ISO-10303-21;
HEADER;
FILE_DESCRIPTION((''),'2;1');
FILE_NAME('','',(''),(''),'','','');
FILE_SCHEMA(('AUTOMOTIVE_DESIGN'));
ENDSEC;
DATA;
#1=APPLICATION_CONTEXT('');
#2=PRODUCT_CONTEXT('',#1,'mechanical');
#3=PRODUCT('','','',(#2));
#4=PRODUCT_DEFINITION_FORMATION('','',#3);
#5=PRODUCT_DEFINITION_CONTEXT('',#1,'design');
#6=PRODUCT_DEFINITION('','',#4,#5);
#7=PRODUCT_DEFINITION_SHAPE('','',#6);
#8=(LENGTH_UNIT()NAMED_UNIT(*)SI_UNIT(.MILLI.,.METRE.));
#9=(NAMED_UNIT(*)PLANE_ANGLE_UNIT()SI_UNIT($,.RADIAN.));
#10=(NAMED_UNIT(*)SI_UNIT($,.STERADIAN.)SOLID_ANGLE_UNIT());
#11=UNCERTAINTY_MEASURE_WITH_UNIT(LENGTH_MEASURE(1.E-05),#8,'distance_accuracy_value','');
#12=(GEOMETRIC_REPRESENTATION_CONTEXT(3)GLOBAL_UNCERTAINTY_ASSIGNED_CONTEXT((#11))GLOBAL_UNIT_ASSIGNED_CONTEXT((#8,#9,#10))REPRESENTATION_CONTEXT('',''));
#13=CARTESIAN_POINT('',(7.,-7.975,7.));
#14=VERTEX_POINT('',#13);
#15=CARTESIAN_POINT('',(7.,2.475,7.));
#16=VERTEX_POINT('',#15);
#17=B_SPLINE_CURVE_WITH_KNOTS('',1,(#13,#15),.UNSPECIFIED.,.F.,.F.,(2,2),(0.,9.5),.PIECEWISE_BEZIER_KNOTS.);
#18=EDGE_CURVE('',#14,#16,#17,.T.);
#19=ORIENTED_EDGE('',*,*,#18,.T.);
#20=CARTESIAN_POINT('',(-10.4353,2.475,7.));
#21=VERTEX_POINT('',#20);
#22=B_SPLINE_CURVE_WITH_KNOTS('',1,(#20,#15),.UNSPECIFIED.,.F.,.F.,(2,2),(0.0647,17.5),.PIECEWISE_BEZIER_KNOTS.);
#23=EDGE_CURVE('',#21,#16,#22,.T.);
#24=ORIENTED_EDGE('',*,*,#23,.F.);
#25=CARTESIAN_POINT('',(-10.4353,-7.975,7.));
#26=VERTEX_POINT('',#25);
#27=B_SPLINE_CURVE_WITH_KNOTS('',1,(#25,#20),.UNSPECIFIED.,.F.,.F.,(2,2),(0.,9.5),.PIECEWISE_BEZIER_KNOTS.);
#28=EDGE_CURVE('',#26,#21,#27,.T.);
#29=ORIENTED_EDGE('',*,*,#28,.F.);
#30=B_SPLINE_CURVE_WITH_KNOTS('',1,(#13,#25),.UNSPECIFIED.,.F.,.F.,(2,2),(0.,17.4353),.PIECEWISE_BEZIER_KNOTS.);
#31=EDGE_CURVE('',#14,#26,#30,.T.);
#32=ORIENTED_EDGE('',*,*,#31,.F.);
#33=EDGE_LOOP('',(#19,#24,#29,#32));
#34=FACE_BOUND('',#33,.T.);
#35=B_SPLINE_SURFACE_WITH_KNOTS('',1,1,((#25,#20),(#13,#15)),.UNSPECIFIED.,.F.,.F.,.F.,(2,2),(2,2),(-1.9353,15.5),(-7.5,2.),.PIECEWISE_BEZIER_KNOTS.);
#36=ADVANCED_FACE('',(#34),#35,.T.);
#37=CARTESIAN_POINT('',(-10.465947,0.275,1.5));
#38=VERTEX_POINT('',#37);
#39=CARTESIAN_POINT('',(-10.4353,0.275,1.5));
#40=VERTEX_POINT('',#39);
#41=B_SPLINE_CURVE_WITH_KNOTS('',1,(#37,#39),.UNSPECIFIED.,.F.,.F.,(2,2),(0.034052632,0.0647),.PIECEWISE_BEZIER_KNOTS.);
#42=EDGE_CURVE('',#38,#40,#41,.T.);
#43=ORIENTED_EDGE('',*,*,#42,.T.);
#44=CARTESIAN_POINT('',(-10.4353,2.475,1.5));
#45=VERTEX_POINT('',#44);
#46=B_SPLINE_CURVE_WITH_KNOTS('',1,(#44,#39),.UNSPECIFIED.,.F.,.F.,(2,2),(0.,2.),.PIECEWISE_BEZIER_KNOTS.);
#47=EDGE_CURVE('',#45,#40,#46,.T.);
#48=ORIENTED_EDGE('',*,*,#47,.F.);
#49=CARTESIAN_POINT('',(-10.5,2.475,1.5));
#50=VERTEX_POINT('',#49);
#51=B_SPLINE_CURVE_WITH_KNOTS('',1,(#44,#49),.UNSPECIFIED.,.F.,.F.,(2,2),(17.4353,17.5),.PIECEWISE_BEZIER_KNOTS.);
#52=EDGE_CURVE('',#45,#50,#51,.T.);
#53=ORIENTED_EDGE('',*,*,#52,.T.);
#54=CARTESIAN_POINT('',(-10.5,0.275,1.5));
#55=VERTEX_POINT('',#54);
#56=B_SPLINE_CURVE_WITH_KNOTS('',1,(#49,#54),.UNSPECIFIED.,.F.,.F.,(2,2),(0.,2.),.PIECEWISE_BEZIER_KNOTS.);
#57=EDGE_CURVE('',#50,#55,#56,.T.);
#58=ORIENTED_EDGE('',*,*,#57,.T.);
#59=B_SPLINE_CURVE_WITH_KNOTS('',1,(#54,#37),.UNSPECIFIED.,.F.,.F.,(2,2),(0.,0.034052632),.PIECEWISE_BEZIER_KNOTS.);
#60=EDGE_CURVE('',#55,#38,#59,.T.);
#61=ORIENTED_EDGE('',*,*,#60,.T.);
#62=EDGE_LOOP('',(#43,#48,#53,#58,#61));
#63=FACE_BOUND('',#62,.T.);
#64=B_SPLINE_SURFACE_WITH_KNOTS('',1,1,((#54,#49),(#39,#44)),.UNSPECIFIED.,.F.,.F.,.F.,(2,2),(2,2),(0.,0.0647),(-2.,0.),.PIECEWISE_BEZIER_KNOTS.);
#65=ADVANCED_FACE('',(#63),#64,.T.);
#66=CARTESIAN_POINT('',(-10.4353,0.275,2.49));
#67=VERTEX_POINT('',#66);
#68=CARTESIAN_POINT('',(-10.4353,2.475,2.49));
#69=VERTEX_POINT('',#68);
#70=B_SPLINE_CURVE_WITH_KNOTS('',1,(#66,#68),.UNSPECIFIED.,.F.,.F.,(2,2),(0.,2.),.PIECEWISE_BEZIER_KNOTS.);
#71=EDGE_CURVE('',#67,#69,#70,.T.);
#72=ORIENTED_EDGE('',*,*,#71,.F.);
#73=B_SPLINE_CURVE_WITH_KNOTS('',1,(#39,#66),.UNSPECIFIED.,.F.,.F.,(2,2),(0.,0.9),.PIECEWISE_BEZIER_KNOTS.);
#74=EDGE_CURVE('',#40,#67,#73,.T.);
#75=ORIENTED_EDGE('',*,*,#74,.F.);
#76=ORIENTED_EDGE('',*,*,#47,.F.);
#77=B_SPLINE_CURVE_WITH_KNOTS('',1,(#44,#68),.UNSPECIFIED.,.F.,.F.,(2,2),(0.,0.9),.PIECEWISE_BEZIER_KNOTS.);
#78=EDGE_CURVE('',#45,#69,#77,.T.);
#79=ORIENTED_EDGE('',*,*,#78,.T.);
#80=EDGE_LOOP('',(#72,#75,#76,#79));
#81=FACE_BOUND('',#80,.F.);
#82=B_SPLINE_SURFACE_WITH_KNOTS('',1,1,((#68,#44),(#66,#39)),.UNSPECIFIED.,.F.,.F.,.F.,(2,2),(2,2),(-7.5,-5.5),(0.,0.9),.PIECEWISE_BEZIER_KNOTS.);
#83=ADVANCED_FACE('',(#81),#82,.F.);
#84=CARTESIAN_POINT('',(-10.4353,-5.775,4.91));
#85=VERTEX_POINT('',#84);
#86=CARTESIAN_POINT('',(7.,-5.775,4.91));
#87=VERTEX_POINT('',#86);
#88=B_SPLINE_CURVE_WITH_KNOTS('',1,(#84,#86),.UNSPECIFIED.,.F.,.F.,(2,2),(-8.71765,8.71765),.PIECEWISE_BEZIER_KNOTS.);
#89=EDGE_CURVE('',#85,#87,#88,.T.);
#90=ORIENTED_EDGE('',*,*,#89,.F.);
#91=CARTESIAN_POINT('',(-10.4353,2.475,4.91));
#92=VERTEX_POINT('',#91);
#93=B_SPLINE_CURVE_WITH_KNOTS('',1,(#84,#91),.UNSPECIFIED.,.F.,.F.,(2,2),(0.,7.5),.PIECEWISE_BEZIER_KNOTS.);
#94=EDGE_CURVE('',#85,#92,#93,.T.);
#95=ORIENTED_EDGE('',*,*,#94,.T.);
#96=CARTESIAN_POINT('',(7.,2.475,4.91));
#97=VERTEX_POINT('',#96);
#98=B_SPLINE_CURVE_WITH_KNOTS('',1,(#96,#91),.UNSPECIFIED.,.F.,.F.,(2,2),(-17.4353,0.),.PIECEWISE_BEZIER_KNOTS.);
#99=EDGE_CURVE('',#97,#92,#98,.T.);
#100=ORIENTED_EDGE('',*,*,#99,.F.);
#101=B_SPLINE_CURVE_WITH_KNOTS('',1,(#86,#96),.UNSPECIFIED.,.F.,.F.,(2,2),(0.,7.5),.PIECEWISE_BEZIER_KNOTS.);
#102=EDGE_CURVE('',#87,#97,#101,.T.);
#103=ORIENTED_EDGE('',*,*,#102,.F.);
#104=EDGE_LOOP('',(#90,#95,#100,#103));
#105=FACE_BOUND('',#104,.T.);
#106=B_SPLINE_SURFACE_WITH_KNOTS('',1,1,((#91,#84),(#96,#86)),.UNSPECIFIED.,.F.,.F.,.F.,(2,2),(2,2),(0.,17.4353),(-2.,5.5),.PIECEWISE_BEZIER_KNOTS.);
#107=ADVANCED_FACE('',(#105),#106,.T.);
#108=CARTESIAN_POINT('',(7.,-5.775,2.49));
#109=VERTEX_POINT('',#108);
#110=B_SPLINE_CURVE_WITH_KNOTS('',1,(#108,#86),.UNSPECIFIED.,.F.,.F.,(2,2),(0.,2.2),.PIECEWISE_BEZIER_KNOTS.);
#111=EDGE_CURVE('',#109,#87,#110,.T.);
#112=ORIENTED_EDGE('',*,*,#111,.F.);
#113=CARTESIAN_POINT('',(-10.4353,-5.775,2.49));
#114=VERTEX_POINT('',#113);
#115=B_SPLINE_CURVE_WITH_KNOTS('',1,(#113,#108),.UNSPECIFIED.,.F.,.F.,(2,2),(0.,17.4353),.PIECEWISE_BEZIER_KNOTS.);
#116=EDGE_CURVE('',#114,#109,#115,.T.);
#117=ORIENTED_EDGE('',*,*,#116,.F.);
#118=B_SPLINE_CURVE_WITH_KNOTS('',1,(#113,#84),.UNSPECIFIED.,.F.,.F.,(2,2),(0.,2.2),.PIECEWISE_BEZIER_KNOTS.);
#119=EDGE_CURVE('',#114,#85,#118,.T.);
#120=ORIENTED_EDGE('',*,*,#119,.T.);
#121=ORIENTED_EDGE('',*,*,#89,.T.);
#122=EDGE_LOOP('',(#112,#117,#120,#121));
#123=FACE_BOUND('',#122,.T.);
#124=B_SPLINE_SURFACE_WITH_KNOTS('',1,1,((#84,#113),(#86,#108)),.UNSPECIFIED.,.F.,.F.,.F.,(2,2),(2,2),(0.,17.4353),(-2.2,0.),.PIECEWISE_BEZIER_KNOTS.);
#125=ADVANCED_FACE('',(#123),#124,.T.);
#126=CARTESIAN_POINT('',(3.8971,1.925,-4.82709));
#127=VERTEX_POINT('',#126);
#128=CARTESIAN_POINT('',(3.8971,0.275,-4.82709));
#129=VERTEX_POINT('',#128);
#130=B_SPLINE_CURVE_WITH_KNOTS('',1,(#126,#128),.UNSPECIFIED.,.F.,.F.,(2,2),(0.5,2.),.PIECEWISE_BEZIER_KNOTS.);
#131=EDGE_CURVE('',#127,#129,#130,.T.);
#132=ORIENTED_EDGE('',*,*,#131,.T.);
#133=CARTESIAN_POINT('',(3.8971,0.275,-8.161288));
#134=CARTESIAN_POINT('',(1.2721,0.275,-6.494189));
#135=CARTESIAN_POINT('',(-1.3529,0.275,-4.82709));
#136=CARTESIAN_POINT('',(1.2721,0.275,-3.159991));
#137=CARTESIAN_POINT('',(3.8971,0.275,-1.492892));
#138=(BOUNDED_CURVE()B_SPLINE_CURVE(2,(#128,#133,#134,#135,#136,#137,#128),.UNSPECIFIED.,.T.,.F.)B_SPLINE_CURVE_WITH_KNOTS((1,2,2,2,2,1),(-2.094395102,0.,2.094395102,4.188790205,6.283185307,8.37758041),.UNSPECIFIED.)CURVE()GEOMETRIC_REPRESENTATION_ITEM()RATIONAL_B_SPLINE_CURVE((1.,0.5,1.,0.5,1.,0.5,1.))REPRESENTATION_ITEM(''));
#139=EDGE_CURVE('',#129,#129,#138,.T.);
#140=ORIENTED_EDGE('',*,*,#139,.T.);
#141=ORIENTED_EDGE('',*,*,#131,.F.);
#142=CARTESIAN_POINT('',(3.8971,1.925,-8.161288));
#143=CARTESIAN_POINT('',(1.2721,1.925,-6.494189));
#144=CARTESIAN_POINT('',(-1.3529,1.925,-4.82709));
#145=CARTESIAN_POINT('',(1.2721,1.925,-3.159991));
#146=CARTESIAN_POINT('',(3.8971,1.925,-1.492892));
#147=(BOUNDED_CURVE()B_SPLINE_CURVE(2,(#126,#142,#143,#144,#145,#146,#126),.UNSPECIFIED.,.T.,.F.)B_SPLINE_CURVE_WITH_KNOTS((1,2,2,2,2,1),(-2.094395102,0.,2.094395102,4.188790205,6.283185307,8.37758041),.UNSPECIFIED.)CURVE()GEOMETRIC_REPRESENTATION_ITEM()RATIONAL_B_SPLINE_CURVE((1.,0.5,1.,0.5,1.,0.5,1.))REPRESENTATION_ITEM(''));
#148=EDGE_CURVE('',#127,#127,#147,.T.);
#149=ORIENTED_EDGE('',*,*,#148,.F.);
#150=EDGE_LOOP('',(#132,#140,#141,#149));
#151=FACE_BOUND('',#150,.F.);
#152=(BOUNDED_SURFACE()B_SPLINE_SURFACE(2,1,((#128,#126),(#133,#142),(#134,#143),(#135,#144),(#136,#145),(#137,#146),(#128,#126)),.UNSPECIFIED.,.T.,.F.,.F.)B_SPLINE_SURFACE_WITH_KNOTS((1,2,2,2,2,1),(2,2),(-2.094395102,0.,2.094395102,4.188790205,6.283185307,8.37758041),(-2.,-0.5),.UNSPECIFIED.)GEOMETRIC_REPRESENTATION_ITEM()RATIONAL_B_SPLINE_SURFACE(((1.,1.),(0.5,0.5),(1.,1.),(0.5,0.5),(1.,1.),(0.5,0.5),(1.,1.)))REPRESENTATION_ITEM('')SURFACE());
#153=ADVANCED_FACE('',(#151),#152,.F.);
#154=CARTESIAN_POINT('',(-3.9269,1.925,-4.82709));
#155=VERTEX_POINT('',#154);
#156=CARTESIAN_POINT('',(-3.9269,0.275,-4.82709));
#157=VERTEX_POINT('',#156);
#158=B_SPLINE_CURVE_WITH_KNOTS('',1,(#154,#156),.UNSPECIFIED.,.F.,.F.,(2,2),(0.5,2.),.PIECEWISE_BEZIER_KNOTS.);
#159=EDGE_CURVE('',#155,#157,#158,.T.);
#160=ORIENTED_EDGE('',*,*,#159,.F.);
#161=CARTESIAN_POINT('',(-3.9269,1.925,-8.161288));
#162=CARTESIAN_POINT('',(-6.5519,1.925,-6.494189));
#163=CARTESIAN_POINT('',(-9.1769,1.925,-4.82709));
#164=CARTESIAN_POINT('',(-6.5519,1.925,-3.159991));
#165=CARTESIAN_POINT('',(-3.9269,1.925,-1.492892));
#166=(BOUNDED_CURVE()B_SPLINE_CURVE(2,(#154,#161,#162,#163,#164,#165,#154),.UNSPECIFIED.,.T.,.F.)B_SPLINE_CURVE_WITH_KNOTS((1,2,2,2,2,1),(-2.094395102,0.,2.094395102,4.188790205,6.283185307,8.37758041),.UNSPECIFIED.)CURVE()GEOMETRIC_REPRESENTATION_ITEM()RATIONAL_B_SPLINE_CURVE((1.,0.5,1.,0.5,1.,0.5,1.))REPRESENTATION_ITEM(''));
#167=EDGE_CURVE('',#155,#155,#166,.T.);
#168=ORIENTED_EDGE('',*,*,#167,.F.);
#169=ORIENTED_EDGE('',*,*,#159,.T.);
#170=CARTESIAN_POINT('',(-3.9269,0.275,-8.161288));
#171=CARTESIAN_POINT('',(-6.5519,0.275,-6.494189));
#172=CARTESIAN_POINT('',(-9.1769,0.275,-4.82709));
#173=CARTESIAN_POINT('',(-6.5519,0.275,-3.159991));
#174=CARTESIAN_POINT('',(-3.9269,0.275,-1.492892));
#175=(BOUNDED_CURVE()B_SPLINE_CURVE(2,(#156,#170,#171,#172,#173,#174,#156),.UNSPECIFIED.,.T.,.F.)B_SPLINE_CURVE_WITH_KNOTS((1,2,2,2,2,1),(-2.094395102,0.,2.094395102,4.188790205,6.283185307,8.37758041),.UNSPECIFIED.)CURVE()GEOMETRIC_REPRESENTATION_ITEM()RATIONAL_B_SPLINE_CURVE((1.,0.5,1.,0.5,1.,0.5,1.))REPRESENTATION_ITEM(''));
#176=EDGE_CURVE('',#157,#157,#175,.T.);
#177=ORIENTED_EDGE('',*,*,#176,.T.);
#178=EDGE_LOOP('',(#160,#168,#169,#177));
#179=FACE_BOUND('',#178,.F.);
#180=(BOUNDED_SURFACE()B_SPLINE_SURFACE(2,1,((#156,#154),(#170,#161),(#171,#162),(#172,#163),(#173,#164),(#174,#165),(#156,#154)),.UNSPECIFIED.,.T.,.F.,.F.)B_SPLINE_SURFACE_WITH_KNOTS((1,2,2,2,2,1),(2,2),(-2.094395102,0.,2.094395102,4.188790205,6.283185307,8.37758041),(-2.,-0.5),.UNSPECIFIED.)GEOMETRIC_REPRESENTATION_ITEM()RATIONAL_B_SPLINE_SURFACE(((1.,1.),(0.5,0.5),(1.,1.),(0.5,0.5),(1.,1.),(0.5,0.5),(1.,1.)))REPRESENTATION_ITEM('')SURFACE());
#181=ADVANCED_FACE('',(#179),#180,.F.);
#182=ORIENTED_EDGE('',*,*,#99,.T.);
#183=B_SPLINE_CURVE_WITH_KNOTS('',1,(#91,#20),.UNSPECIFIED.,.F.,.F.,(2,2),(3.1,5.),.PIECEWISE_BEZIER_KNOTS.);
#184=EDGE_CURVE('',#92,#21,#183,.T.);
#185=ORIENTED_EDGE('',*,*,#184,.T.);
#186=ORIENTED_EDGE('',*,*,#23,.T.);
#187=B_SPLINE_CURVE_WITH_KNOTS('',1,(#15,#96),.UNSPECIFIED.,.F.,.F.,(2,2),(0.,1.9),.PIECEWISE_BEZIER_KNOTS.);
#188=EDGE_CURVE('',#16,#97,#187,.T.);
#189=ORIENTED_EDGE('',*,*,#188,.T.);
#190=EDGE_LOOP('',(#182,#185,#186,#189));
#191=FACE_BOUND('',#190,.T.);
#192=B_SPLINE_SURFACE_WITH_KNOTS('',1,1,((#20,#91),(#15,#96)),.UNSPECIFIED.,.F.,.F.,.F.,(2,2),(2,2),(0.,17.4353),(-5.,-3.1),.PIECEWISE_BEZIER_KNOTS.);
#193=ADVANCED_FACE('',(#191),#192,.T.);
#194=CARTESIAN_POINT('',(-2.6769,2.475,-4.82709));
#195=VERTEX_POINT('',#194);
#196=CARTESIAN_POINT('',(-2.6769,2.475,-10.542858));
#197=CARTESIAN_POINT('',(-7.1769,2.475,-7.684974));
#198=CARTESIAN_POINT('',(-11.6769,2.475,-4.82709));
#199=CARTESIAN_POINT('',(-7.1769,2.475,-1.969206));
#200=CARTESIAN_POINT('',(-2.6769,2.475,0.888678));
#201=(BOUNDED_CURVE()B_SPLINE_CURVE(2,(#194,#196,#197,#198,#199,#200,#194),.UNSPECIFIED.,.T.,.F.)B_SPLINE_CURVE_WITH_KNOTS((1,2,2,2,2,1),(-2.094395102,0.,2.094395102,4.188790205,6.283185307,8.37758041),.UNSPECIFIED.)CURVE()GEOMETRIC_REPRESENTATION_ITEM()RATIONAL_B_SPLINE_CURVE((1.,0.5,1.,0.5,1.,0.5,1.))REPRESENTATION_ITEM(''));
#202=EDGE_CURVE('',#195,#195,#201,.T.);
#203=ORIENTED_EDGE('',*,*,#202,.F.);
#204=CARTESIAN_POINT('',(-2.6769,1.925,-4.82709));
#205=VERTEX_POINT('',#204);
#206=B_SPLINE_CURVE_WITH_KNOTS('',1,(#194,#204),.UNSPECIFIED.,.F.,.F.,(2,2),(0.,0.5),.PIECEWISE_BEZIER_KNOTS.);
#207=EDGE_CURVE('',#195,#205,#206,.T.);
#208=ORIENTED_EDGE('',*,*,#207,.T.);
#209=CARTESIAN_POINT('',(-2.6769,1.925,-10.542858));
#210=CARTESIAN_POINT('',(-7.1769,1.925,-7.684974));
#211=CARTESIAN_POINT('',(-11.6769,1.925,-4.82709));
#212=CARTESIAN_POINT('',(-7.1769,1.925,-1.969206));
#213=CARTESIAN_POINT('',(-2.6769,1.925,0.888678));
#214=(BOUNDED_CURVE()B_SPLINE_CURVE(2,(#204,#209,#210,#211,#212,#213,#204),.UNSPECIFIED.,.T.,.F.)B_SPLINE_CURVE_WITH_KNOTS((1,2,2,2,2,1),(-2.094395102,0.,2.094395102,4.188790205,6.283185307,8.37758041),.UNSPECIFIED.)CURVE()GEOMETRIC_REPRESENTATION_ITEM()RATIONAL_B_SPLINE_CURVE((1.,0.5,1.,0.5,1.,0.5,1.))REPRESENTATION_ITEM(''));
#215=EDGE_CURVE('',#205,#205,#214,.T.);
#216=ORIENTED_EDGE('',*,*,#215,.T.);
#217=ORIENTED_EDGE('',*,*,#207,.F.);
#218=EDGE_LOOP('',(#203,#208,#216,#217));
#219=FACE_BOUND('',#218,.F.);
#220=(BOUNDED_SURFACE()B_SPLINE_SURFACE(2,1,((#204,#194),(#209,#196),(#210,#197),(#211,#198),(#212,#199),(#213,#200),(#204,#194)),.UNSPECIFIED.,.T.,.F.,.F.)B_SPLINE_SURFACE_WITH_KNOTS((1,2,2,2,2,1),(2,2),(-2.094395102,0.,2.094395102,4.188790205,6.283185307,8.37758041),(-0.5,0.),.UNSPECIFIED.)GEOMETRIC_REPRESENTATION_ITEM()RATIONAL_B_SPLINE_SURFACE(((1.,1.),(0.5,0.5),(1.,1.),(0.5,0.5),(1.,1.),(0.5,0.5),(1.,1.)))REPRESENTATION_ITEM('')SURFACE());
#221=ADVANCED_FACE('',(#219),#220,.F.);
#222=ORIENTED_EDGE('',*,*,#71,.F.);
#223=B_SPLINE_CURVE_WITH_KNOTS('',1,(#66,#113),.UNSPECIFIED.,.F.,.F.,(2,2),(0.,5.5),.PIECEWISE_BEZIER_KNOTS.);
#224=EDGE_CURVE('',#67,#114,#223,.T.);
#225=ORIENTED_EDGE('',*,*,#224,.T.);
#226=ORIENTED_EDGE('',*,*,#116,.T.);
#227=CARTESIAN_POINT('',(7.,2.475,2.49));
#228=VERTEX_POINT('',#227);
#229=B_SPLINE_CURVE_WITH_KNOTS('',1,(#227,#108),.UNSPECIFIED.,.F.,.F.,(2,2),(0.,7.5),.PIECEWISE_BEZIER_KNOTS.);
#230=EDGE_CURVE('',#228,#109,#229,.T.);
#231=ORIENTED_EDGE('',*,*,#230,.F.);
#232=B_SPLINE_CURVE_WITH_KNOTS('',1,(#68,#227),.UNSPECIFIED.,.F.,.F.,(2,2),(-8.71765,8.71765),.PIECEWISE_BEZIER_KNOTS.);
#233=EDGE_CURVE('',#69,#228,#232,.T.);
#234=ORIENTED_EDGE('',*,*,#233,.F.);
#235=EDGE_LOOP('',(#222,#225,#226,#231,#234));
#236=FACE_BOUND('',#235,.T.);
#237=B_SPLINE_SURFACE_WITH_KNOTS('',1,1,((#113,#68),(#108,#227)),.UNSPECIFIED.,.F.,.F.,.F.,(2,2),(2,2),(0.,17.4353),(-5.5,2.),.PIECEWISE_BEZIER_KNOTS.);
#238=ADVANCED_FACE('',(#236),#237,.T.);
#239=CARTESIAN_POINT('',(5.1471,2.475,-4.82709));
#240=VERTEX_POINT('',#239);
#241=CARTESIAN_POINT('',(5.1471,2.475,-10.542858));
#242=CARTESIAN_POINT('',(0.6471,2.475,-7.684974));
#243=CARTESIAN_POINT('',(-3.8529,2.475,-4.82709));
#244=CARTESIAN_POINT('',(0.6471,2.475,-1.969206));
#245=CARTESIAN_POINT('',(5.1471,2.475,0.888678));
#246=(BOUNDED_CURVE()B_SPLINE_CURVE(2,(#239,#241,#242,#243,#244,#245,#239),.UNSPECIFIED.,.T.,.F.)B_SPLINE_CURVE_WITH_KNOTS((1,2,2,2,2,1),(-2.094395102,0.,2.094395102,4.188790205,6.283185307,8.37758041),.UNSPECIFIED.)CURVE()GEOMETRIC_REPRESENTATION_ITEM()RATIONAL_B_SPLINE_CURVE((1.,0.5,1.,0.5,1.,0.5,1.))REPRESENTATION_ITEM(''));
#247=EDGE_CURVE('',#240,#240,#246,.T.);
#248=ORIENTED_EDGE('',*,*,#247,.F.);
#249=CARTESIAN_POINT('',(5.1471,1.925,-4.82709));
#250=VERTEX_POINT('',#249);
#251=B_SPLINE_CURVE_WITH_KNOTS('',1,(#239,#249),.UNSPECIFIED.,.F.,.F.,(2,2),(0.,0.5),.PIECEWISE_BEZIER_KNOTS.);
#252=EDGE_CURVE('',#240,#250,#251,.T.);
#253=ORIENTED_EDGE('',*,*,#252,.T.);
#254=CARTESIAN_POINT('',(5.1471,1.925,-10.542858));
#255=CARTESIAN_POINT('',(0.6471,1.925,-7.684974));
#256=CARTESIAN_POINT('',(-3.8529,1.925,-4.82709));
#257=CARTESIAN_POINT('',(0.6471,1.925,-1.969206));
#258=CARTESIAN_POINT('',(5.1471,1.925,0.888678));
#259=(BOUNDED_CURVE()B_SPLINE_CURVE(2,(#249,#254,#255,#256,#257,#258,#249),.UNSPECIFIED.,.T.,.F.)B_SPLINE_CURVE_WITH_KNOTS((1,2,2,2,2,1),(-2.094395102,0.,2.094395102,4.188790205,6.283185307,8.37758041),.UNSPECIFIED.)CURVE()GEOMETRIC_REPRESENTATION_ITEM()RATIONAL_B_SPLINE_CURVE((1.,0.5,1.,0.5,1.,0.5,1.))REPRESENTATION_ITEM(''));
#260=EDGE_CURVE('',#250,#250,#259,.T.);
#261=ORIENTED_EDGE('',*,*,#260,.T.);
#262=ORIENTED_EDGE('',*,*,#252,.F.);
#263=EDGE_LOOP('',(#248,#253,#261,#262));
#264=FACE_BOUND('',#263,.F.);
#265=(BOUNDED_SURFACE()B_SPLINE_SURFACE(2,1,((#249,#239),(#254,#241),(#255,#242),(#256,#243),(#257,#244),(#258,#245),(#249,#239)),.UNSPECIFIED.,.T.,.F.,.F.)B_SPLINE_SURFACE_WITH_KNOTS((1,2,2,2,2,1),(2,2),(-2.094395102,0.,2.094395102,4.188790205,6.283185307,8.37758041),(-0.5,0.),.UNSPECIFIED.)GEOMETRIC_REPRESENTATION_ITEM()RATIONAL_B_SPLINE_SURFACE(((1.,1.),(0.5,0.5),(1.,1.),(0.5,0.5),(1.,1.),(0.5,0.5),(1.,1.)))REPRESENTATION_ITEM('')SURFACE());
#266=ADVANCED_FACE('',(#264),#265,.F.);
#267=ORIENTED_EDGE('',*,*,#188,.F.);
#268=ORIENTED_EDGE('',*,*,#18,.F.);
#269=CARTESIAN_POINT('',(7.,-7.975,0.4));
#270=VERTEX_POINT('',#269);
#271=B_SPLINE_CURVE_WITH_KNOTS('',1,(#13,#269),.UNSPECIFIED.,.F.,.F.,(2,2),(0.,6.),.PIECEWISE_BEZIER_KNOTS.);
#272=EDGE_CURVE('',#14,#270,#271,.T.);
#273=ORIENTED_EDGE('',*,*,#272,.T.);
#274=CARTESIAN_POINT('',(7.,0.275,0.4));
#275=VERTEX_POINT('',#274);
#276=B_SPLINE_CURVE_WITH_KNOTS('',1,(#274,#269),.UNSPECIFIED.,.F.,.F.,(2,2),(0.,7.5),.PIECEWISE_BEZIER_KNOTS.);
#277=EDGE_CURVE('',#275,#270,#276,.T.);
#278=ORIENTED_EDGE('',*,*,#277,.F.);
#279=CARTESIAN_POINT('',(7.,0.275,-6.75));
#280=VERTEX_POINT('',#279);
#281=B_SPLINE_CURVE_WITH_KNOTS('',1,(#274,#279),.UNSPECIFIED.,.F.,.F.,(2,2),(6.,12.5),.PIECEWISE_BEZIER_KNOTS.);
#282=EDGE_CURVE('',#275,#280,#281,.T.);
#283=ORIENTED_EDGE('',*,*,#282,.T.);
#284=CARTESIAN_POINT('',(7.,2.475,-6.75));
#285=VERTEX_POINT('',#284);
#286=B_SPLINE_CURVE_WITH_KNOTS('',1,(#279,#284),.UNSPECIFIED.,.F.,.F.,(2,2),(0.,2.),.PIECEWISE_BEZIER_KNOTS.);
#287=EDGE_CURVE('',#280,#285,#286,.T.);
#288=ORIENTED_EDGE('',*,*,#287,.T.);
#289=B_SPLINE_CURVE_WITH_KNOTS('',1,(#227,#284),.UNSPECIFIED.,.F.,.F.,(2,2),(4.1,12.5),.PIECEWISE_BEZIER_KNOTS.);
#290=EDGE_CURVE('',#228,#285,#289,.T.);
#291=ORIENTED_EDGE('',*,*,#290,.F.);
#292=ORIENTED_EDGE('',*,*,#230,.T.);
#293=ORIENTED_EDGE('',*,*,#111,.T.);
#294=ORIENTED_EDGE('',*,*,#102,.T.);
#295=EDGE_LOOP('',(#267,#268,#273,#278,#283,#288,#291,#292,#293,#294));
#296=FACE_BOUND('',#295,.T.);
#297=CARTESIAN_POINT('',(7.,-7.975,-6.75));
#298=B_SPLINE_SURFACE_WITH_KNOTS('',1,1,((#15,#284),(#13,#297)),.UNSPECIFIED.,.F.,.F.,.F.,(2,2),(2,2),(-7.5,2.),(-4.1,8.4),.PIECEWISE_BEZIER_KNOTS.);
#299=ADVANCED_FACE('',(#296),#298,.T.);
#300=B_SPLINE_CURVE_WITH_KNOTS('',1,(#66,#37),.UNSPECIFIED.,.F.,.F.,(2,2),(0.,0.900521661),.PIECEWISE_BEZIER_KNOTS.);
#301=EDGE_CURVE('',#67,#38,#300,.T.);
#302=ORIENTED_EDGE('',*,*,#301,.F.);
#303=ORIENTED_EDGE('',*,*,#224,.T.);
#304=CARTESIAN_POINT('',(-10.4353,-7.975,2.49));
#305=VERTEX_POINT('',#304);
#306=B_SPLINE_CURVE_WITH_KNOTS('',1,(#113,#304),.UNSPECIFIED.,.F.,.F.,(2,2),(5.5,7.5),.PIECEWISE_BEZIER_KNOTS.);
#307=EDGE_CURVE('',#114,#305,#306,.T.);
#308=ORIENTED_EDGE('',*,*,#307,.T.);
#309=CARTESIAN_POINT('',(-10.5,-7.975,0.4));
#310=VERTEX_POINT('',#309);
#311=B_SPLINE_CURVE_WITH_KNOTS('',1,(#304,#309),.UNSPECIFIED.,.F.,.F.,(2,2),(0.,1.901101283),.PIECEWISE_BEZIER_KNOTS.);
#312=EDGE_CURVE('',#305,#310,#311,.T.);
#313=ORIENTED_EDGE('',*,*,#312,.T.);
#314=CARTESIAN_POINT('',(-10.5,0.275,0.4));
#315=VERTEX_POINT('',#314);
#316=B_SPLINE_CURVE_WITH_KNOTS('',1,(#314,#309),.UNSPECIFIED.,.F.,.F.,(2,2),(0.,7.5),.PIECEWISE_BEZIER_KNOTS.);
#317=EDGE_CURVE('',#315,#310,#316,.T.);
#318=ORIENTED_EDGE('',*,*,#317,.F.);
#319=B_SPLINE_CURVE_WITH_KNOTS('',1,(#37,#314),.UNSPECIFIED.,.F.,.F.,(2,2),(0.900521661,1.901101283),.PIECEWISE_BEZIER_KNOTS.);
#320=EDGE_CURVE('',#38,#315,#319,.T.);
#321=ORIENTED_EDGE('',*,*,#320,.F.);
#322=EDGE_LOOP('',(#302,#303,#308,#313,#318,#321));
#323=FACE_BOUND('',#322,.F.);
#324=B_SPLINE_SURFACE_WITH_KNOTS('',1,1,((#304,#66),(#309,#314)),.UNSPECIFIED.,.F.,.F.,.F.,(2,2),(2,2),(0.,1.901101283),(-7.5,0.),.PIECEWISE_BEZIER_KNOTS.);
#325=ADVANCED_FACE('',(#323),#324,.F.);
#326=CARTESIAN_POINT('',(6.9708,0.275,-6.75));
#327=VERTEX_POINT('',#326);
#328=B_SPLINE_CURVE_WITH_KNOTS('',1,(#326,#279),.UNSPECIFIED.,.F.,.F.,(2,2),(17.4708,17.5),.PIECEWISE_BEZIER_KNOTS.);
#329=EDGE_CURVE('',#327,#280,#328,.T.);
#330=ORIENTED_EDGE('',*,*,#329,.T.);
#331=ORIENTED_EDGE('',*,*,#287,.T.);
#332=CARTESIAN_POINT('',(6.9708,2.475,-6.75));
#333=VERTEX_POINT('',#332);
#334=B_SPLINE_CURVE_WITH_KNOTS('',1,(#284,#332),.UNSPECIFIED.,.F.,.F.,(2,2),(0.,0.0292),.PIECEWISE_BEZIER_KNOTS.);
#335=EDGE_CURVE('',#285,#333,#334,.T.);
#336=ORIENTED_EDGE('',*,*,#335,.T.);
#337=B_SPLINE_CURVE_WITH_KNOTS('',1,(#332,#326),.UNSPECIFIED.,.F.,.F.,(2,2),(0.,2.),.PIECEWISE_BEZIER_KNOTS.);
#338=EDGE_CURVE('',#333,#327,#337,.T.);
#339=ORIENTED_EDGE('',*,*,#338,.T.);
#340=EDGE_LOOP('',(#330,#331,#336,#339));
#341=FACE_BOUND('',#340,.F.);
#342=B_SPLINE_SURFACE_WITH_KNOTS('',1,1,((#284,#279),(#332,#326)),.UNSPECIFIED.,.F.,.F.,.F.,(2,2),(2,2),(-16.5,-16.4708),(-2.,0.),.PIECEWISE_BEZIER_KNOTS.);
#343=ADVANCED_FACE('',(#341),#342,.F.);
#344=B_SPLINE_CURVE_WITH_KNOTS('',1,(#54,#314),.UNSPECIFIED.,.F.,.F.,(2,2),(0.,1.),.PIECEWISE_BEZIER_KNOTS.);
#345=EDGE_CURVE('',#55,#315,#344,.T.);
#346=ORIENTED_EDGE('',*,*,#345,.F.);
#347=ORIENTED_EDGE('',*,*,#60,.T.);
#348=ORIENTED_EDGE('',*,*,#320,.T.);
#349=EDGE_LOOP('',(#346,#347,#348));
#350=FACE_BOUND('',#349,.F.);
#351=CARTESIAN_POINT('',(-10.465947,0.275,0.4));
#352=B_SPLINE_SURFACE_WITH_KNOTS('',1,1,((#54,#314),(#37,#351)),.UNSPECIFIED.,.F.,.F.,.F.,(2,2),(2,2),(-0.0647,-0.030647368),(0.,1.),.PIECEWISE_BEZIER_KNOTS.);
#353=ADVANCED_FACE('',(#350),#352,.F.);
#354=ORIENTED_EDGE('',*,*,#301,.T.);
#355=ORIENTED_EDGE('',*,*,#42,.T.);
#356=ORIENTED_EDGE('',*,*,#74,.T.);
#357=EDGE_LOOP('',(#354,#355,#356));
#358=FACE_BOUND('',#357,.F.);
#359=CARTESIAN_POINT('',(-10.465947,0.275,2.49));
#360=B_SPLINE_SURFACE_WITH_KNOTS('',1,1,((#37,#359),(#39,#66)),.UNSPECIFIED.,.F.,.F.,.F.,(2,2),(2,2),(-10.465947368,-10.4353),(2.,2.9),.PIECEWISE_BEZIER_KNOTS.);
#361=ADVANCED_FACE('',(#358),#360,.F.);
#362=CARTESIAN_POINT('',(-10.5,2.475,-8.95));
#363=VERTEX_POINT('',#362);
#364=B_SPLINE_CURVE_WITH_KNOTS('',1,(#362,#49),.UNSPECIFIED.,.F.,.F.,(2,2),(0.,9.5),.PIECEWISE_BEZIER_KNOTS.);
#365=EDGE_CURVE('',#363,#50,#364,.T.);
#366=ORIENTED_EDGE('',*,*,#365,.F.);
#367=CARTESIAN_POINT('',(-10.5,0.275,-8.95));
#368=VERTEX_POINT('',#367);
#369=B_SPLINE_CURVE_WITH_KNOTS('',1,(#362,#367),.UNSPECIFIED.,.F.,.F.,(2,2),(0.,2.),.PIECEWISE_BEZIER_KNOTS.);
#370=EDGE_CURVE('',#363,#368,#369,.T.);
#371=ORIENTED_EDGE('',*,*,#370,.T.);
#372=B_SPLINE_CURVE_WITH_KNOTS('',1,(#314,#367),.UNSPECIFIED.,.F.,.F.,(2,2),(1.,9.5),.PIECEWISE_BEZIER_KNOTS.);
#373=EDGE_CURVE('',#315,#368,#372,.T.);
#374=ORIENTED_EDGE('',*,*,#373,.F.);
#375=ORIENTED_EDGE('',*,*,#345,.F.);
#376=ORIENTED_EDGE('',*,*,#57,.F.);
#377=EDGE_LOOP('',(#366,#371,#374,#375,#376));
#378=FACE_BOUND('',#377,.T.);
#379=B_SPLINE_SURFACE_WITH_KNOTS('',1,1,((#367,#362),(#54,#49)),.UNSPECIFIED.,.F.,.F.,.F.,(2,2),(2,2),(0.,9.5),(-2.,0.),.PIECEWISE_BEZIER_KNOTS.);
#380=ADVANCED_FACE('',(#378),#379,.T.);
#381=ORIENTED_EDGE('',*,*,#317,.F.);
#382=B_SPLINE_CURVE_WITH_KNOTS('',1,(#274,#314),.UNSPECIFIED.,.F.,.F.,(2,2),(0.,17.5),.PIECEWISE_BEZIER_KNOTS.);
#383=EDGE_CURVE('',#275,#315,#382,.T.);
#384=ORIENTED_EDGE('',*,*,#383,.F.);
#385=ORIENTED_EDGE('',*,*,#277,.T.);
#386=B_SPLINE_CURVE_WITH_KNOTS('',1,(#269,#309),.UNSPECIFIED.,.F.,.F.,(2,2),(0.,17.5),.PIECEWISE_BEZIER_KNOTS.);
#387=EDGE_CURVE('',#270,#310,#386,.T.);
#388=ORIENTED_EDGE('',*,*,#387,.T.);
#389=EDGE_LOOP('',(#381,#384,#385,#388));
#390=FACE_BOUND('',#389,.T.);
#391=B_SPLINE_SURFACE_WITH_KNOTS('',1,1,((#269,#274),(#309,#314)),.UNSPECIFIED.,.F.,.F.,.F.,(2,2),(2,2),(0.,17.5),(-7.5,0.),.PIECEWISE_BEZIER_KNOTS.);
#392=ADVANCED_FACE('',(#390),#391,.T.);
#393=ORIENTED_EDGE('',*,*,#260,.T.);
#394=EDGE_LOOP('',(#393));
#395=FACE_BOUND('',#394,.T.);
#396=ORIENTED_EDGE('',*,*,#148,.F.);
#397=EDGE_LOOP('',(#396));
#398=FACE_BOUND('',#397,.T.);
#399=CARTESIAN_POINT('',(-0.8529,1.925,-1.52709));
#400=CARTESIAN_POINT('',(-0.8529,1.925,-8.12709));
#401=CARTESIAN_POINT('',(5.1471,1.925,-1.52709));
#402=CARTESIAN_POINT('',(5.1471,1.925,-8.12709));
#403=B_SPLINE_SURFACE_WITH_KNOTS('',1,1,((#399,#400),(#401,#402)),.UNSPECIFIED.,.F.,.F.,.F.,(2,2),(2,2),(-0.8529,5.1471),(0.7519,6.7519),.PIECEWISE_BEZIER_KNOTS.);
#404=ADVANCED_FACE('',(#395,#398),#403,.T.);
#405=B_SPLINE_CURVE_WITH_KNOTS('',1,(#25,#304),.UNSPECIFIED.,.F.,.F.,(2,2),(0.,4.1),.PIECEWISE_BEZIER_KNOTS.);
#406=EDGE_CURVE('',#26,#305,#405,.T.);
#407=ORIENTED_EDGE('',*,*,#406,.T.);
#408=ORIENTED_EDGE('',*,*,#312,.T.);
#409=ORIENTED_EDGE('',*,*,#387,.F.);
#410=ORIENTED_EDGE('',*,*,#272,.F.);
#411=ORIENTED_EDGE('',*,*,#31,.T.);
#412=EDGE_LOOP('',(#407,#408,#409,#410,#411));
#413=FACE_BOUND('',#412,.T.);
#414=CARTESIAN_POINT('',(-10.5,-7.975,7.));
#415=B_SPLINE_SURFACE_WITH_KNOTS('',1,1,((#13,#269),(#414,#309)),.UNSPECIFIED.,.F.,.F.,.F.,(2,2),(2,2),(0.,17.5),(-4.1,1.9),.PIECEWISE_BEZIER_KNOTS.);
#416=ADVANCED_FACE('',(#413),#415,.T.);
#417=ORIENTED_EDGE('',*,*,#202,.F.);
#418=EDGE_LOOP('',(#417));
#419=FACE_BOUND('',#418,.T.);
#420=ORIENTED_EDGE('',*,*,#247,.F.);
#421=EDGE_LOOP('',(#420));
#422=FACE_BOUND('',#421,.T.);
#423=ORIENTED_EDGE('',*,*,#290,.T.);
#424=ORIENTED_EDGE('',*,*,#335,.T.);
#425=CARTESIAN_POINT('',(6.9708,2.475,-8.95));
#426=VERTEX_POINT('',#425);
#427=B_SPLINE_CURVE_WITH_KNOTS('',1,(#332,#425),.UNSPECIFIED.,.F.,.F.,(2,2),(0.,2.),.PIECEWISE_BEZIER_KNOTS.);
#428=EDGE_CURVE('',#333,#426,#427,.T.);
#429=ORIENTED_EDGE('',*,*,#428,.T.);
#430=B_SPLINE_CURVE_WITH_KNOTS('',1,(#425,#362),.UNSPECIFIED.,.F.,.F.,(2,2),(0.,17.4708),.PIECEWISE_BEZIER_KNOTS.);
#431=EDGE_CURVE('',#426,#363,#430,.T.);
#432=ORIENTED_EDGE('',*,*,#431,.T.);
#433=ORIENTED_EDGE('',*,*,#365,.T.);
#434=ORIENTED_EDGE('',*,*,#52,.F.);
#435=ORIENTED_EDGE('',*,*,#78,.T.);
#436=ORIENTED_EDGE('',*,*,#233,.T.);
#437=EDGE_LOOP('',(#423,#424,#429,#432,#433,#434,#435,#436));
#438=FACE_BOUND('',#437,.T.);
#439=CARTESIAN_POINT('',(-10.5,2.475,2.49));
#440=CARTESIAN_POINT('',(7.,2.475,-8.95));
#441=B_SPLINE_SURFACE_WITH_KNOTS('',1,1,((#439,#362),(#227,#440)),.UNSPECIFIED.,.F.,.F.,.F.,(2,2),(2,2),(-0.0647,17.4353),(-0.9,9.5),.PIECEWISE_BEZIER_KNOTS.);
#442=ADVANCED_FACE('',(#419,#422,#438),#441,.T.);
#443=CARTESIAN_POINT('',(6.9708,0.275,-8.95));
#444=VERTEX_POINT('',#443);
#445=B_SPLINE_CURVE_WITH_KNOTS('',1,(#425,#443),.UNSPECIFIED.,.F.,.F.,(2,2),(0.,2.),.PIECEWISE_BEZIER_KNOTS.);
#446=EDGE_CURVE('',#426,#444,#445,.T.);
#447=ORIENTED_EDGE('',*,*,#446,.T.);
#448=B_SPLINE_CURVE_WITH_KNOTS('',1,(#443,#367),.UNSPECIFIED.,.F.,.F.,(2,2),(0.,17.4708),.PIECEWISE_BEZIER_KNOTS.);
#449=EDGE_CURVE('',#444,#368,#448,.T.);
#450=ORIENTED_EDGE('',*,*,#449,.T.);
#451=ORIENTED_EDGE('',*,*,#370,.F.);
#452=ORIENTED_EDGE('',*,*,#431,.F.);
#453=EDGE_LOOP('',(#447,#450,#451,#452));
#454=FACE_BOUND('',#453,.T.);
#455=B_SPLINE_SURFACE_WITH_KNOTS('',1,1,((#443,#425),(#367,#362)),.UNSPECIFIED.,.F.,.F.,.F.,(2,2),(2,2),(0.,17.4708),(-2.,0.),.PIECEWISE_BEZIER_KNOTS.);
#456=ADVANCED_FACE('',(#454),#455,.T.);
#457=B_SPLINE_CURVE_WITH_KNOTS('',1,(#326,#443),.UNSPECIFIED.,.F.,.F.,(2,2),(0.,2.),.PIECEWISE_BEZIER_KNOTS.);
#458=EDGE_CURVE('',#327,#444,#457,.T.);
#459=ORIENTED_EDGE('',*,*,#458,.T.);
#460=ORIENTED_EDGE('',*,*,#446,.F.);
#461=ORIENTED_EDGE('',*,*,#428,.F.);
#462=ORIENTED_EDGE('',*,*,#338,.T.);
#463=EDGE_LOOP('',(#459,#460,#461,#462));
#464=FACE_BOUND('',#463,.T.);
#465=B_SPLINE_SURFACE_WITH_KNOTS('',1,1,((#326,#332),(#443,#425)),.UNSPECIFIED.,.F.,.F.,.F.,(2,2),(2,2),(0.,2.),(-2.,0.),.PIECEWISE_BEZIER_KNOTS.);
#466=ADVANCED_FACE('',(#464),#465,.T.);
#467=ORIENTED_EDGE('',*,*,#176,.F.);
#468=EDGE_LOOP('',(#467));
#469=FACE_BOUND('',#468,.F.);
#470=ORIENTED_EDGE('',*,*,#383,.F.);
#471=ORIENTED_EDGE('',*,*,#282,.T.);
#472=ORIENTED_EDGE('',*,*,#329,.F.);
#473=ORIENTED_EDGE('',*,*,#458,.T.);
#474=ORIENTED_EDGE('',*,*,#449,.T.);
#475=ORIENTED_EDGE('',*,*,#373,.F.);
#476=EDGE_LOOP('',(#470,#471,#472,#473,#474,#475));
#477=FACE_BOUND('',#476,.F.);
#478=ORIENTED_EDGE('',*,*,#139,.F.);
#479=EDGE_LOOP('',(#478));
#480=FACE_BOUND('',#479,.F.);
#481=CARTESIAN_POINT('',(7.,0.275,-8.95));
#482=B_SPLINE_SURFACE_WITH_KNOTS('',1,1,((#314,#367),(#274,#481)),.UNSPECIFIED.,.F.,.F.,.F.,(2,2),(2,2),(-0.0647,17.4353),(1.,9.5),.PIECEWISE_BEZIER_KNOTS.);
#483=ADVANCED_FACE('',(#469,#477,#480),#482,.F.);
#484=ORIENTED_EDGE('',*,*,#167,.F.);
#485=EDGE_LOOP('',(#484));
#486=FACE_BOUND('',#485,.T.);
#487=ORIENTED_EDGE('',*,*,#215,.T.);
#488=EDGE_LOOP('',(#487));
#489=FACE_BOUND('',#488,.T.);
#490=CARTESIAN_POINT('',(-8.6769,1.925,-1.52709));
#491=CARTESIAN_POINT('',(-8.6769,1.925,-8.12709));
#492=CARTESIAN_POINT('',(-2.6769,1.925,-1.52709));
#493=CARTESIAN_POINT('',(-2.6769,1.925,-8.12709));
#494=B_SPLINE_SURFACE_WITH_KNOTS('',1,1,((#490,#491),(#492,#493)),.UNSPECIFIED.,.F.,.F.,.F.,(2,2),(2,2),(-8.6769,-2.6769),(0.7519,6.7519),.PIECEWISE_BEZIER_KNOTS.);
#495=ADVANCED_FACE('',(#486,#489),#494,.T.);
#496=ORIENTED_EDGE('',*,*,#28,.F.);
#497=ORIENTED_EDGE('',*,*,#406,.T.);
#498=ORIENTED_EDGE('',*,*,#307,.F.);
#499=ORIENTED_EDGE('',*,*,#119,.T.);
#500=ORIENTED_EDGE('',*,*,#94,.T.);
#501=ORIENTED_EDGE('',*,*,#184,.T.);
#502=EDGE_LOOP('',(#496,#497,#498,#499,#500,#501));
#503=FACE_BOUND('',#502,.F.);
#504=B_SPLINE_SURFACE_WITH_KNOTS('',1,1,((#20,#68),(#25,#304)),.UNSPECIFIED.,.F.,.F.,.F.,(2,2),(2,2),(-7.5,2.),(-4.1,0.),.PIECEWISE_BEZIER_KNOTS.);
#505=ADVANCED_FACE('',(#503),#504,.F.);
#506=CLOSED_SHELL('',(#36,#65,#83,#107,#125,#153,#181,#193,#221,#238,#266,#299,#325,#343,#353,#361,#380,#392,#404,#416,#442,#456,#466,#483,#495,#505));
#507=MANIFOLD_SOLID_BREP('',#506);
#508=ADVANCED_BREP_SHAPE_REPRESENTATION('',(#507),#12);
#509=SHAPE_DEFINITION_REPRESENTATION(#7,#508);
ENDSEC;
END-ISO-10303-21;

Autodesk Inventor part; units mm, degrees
ref_plane "YZ Plane" through (0, 0, 0) normal (1, 0, 0) x (0, 1, 0)
ref_plane "XZ Plane" through (0, 0, 0) normal (0, 1, 0) x (-1, 0, 0)
ref_plane "XY Plane" through (0, 0, 0) normal (0, 0, 1) x (1, 0, 0)
sketch "Boceto1" plane through (0, 0, 0) normal (0, 1, 0) x (-1, 0, 0)
  line L0 (0, 0) -> (3.5, 0)
  line L1 (3.5, 0) -> (5.5, 0)
  line L2 (0, 0) -> (-2, 0)
  line L3 (-2, -5.5) -> (5.5, -5.5)
  line L4 (-2, 0) -> (-5, 0)
  line L5 (-5, -5.5) -> (-2, -5.5)
  line L6 (5.5, 0) -> (8.5, 0)
  line L7 (8.5, -5.5) -> (5.5, -5.5)
  line L8 (8.5, -5.5) -> (9.5, -5.5)
  line L9 (9.5, 0) -> (8.5, 0)
  line L10 (-5, -5.5) -> (-6, -5.5)
  line L11 (-6, 0) -> (-5, 0)
  line L12 (9.5, -5.5) -> (10.5, -5.5)
  line L13 (10.5, -5.5) -> (10.5, 0)
  line L14 (10.5, 0) -> (9.5, 0)
  line L15 (-6, -5.5) -> (-7, -5.5)
  line L16 (-7, -5.5) -> (-7, 0)
  line L17 (-7, 0) -> (-6, 0)
  dimension "d30" = 1
  dimension "d37" = 1
  dimension "d38" = 1
extrude "Extrusión3" add sketch "Boceto1" along normal blind 2
sketch "Boceto4" plane through (-8.5, 0, 0) normal (0, 0, 1) x (1, 0, 0)
  line L0 (15.5, 2) -> (-2, 2) projected
  line L1 (0, 2) -> (13.5, 2)
  line L2 (13.5, 2) -> (13.5, 0)
  line L3 (13.5, 0) -> (0, 0)
  line L4 (0, 0) -> (0, 2)
  point P0 (8.5, 0)
  point P1 (14.5, 2)
  point P2 (-1, 2)
extrude "Extrusión4" add sketch "Boceto4" along normal blind 2
sketch "Boceto13" plane through (0, 2, 0) normal (0, 1, 0) x (1, 0, 0)
  line L0 (7, 5.5) -> (-10.5, 5.5) projected
  line L1 (-10.5, 5.5) -> (6.9708, 5.5)
  line L2 (6.9708, 5.5) -> (6.9708, 7.5)
  line L3 (6.9708, 7.5) -> (-10.5, 7.5)
  line L4 (-10.5, 7.5) -> (-10.5, 5.5)
  point P0 (0, 0)
  point P1 (-8.5, 5.5)
extrude "Extrusión13" add sketch "Boceto13" against normal blind 2
sketch "Boceto14" plane through (0, 2, 0) normal (0, 1, 0) x (1, 0, 0)
  circle A0 centre (2.1471, 3.7519) radius 1.75
  circle A1 centre (-5.6769, 3.7519) radius 1.75
  line L0 (1.1471, 3.7519) -> (2.1471, 3.7519)
  line L1 (-4.6769, 3.7519) -> (-5.6769, 3.7519)
  point P0 (0, 0)
  dimension "d43" = 3.5
  dimension "d44" = 3.5
  dimension "d45" = 1
  dimension "d46" = 1
extrude "Extrusión14" cut sketch "Boceto14" against normal blind 2
sketch "Boceto15" plane through (0, 2, 0) normal (0, 1, 0) x (1, 0, 0)
  circle A0 centre (2.1471, 3.7519) radius 1.75 projected
  circle A1 centre (2.1471, 3.7519) radius 3
  circle A2 centre (-5.6769, 3.7519) radius 1.75 projected
  circle A3 centre (-5.6769, 3.7519) radius 3
  point P0 (0, 0)
  dimension "d49" = 6
  dimension "d50" = 6
extrude "Extrusión15" cut sketch "Boceto15" against normal blind 0.5
sketch "Boceto17" plane through (0, 2, 0) normal (0, 1, 0) x (1, 0, 0)
  line L0 (7, 0) -> (5, 0) projected
  line L1 (7, 0) -> (-10.5, 0)
  line L2 (-10.5, 0) -> (-10.5, -2)
  line L3 (-10.5, -2) -> (7, -2)
  line L4 (7, -2) -> (7, 0)
  point P0 (0, 0)
  dimension "d55" = 17.5
extrude "Extrusión17" add sketch "Boceto17" against normal blind 2
sketch "Boceto18" plane through (-8.5, 0, 2) normal (0, 0, 1) x (1, 0, 0)
  line L0 (-2, 2) -> (15.5, 2) projected
  line L1 (-1.9353, 0) -> (15.5, 0)
  line L2 (15.5, 0) -> (15.5, 2)
  line L3 (15.5, 2) -> (-1.9353, 2)
  line L4 (-1.9353, 2) -> (-1.9353, 0)
  point P0 (8.5, 0)
extrude "Extrusión18" add sketch "Boceto18" along normal blind 5
sketch "Boceto19" plane through (0, 0, 0) normal (0, -1, 0) x (1, 0, 0)
  line L0 (-10.5, -7.5) -> (-10.5, 2) projected
  line L1 (-10.4353, 2.9) -> (7, 2.9)
  line L2 (7, 2.9) -> (7, 1)
  line L3 (7, 1) -> (-10.5, 1)
  line L4 (-10.4353, 2.9) -> (-10.5, 1)
  line L5 (7, 7) -> (-10.4353, 7) projected
  line L6 (7, 7) -> (7, 5.1)
  line L7 (7, 7) -> (7, -5.5) projected
  line L8 (7, 5.1) -> (-10.4353, 5.1)
  line L9 (-10.4353, 2) -> (-10.4353, 7) projected
  line L10 (-10.4353, 7) -> (-10.4353, 5.1)
  line L11 (-10.4353, 7) -> (7, 7)
  point P0 (7, 1.001)
  dimension "d67" = 1.9
  dimension "d68" = 1.9
extrude "Extrusión20" add sketch "Boceto19" along normal blind 7.5 contours L1 L2 L3 L4 | L9 L5 L6 L8
sketch "Boceto21" plane through (-10.4353, 0, 2.9) normal (0, 0, 1) x (1, 0, 0)
  line L0 (17.4353, 0) -> (17.4353, -7.5) projected
  line L1 (0, 2) -> (0, -7.5) projected
  line L2 (17.4353, -7.5) -> (0, -7.5)
  line L3 (0, -7.5) -> (0, -5.5)
  line L4 (0, -5.5) -> (17.4353, -5.5)
  line L5 (17.4353, -5.5) -> (17.4353, -7.5)
  point P0 (10.4353, 0)
  dimension "d71" = 2
extrude "Extrusión21" add sketch "Boceto21" along normal blind 4
sketch "Boceto22" plane through (0, 0, 0) normal (0, -1, 0) x (1, 0, 0)
  line L0 (-10.4353, 2.9) -> (-10.4353, 5.1) projected
  line L1 (7, 2.9) -> (-10.4353, 2.9)
  line L2 (-10.4353, 2.9) -> (-10.4353, 5.1)
  line L3 (-10.4353, 5.1) -> (7, 5.1)
  line L4 (7, 5.1) -> (7, 2.9)
  point P0 (0, 0)
extrude "Extrusión22" cut sketch "Boceto22" against normal blind 6.25
scale "Escala1" factors (1, 1, 1.1) then translate (0, 0, -0.7) bodies 1
scale "Escala2" factors (1, 1.1, 1) then translate (0, 0.275, 0) bodies 1
properties part number "Pantalla - encaix slider"
